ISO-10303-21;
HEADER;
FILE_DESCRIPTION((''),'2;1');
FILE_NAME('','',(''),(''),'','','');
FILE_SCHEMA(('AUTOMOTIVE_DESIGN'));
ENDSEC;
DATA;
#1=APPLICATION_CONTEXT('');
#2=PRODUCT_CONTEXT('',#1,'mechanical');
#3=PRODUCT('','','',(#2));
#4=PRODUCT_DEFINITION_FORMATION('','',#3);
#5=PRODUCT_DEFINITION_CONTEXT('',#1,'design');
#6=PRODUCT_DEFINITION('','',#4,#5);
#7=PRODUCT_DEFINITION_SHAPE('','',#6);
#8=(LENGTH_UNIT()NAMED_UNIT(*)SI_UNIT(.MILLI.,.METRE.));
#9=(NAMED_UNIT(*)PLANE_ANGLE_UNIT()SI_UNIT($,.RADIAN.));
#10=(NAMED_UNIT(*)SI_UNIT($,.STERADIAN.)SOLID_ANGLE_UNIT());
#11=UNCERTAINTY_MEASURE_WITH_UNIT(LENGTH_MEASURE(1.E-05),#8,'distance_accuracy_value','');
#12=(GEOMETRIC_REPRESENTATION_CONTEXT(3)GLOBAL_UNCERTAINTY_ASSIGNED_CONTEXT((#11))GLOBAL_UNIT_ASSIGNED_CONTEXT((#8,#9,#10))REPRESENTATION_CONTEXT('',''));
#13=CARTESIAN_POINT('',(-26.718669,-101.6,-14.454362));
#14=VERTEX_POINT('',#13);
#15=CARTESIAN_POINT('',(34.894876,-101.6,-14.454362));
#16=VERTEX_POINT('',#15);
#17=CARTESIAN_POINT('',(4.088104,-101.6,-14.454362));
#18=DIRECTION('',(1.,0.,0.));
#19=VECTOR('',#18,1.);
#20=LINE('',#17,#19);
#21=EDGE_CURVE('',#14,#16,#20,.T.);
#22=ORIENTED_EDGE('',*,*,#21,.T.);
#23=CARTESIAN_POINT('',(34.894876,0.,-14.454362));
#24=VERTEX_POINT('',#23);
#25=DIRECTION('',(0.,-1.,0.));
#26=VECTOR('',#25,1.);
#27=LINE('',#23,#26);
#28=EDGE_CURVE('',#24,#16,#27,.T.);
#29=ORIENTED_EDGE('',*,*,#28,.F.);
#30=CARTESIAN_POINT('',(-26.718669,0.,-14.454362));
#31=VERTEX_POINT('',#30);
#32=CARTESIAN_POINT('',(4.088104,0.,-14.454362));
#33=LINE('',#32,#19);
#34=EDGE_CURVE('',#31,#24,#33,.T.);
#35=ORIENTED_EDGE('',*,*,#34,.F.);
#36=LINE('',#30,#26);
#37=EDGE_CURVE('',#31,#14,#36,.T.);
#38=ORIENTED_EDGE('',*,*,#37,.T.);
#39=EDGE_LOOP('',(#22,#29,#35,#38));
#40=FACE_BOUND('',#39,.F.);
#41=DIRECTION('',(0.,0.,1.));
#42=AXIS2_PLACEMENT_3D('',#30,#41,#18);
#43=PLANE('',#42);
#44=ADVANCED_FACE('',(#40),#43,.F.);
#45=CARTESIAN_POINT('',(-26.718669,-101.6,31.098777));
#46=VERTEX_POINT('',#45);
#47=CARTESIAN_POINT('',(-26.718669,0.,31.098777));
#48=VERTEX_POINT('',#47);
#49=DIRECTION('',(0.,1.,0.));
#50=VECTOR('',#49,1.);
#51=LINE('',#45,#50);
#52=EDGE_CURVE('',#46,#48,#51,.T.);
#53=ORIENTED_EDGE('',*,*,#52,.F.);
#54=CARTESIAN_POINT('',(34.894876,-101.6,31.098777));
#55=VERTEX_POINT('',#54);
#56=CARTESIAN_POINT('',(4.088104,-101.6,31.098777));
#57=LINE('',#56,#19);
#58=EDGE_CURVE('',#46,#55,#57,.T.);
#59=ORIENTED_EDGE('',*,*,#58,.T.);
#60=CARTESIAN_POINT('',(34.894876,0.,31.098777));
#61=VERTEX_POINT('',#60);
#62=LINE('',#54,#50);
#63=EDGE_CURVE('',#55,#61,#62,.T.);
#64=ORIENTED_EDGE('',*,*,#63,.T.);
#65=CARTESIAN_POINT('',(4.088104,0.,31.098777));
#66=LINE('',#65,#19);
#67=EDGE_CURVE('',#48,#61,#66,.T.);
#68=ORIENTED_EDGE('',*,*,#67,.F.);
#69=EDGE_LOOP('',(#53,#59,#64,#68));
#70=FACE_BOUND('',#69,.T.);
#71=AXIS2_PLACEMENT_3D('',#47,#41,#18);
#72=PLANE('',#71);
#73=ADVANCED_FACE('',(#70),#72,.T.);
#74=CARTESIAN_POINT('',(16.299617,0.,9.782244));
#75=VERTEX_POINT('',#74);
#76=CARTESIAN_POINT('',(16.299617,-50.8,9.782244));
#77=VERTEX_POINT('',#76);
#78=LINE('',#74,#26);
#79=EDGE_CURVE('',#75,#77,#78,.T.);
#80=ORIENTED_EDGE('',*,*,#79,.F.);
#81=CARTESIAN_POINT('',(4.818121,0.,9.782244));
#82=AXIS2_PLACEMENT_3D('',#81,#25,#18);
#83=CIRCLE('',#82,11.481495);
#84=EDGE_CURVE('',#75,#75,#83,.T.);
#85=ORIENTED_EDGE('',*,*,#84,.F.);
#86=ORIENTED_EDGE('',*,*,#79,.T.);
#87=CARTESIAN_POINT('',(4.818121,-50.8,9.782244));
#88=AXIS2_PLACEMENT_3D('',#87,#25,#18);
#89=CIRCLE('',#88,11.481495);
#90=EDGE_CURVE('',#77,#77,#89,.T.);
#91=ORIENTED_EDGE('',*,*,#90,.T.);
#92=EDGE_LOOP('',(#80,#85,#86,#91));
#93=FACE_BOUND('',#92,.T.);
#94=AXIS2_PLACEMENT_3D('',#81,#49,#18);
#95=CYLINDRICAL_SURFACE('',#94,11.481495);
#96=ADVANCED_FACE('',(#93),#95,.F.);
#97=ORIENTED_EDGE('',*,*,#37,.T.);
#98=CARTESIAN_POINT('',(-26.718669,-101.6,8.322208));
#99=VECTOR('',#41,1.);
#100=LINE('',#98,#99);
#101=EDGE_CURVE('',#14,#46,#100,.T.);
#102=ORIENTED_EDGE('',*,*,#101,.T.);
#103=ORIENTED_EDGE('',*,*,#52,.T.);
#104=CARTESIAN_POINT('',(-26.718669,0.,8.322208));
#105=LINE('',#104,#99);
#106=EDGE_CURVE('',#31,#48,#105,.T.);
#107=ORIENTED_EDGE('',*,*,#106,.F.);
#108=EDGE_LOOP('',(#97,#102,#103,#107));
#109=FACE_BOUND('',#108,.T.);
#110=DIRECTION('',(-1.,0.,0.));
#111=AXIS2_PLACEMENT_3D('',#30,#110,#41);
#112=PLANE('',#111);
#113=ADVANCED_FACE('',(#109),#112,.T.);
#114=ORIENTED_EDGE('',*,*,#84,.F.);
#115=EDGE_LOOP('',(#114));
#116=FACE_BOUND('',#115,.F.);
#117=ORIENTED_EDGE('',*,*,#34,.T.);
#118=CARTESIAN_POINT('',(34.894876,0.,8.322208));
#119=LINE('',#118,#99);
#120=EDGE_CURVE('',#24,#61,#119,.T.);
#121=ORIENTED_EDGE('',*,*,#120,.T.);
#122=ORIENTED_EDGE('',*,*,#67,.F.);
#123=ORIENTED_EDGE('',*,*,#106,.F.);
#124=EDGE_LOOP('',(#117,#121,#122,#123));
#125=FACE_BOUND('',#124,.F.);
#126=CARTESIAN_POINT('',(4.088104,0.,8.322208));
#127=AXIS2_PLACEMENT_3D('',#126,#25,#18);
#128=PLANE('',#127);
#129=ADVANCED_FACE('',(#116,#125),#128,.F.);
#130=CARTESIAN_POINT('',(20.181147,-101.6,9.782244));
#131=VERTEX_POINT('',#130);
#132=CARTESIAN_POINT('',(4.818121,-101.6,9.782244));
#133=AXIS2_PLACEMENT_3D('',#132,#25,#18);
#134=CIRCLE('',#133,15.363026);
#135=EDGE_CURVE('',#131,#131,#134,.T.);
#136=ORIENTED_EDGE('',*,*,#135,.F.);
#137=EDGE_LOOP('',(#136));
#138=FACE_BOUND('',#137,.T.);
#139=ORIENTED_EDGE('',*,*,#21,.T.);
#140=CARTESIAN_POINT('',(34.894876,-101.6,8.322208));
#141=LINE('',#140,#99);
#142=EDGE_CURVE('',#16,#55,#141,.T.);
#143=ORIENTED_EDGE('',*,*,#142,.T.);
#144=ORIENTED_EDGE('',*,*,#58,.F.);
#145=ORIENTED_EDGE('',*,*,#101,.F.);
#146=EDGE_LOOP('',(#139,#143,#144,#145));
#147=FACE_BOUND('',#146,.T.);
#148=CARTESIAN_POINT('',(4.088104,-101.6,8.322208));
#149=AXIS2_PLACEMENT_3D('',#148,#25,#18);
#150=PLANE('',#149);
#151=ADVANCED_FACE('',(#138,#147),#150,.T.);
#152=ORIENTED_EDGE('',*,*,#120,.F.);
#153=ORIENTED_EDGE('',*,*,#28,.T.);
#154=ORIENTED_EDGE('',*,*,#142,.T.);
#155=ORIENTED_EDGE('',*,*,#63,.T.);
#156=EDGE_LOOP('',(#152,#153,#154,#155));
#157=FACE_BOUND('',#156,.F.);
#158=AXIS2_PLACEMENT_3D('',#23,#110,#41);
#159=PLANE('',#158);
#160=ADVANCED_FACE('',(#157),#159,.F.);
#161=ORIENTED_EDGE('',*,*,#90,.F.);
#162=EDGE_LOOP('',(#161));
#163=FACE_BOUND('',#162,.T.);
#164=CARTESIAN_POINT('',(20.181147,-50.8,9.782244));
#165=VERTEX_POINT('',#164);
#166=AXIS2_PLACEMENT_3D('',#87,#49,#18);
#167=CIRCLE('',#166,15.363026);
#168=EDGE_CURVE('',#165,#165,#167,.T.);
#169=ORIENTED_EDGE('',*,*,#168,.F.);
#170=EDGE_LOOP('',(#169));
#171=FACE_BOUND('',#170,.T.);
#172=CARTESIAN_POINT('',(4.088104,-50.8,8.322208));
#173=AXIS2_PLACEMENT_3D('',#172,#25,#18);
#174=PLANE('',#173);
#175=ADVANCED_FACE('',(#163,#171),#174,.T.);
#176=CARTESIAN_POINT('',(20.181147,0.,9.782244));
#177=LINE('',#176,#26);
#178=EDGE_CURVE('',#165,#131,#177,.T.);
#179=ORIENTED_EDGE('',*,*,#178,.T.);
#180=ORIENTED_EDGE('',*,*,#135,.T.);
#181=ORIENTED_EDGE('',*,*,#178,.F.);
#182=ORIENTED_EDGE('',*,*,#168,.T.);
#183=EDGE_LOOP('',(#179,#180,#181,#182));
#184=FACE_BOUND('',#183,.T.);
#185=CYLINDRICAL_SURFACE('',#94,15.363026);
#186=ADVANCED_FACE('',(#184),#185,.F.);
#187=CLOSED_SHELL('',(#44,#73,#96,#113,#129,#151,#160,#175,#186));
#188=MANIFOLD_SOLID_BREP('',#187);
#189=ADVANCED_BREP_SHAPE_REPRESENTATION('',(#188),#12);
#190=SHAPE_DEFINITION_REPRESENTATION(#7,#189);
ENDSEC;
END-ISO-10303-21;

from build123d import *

# Parameters (mm, degrees)
F0_W     = 61.6135448217
F0_H     = 45.5531394109
F0_R     = 15.3630255382
F0_R_2   = 11.4814952194
F1_DEPTH = 50.8
F2_DEPTH = 101.6


# Not quite as in the source:
# - the program builds the solid bodies; features that only make, move or delete a surface that nothing else refers to are left out


with BuildPart() as f1:
    # F0 (on Front) → F1 (new body)
    with BuildSketch(Plane.XZ):
        with Locations((4.0881037712, 8.3222077228)):
            Rectangle(F0_W, F0_H)
        with Locations((4.818121437, 9.7822444513)):
            Circle(F0_R, mode=Mode.SUBTRACT)
        with Locations((4.818121437, 9.7822444513)):
            Circle(F0_R)
        with Locations((4.818121437, 9.7822444513)):
            Circle(F0_R_2, mode=Mode.SUBTRACT)
    extrude(amount=F1_DEPTH)

    # F0 (on Front) → F2 (join)
    with BuildSketch(Plane.XZ):
        with Locations((4.0881037712, 8.3222077228)):
            Rectangle(F0_W, F0_H)
        with Locations((4.818121437, 9.7822444513)):
            Circle(F0_R, mode=Mode.SUBTRACT)
    extrude(amount=F2_DEPTH)


solid = f1.part
